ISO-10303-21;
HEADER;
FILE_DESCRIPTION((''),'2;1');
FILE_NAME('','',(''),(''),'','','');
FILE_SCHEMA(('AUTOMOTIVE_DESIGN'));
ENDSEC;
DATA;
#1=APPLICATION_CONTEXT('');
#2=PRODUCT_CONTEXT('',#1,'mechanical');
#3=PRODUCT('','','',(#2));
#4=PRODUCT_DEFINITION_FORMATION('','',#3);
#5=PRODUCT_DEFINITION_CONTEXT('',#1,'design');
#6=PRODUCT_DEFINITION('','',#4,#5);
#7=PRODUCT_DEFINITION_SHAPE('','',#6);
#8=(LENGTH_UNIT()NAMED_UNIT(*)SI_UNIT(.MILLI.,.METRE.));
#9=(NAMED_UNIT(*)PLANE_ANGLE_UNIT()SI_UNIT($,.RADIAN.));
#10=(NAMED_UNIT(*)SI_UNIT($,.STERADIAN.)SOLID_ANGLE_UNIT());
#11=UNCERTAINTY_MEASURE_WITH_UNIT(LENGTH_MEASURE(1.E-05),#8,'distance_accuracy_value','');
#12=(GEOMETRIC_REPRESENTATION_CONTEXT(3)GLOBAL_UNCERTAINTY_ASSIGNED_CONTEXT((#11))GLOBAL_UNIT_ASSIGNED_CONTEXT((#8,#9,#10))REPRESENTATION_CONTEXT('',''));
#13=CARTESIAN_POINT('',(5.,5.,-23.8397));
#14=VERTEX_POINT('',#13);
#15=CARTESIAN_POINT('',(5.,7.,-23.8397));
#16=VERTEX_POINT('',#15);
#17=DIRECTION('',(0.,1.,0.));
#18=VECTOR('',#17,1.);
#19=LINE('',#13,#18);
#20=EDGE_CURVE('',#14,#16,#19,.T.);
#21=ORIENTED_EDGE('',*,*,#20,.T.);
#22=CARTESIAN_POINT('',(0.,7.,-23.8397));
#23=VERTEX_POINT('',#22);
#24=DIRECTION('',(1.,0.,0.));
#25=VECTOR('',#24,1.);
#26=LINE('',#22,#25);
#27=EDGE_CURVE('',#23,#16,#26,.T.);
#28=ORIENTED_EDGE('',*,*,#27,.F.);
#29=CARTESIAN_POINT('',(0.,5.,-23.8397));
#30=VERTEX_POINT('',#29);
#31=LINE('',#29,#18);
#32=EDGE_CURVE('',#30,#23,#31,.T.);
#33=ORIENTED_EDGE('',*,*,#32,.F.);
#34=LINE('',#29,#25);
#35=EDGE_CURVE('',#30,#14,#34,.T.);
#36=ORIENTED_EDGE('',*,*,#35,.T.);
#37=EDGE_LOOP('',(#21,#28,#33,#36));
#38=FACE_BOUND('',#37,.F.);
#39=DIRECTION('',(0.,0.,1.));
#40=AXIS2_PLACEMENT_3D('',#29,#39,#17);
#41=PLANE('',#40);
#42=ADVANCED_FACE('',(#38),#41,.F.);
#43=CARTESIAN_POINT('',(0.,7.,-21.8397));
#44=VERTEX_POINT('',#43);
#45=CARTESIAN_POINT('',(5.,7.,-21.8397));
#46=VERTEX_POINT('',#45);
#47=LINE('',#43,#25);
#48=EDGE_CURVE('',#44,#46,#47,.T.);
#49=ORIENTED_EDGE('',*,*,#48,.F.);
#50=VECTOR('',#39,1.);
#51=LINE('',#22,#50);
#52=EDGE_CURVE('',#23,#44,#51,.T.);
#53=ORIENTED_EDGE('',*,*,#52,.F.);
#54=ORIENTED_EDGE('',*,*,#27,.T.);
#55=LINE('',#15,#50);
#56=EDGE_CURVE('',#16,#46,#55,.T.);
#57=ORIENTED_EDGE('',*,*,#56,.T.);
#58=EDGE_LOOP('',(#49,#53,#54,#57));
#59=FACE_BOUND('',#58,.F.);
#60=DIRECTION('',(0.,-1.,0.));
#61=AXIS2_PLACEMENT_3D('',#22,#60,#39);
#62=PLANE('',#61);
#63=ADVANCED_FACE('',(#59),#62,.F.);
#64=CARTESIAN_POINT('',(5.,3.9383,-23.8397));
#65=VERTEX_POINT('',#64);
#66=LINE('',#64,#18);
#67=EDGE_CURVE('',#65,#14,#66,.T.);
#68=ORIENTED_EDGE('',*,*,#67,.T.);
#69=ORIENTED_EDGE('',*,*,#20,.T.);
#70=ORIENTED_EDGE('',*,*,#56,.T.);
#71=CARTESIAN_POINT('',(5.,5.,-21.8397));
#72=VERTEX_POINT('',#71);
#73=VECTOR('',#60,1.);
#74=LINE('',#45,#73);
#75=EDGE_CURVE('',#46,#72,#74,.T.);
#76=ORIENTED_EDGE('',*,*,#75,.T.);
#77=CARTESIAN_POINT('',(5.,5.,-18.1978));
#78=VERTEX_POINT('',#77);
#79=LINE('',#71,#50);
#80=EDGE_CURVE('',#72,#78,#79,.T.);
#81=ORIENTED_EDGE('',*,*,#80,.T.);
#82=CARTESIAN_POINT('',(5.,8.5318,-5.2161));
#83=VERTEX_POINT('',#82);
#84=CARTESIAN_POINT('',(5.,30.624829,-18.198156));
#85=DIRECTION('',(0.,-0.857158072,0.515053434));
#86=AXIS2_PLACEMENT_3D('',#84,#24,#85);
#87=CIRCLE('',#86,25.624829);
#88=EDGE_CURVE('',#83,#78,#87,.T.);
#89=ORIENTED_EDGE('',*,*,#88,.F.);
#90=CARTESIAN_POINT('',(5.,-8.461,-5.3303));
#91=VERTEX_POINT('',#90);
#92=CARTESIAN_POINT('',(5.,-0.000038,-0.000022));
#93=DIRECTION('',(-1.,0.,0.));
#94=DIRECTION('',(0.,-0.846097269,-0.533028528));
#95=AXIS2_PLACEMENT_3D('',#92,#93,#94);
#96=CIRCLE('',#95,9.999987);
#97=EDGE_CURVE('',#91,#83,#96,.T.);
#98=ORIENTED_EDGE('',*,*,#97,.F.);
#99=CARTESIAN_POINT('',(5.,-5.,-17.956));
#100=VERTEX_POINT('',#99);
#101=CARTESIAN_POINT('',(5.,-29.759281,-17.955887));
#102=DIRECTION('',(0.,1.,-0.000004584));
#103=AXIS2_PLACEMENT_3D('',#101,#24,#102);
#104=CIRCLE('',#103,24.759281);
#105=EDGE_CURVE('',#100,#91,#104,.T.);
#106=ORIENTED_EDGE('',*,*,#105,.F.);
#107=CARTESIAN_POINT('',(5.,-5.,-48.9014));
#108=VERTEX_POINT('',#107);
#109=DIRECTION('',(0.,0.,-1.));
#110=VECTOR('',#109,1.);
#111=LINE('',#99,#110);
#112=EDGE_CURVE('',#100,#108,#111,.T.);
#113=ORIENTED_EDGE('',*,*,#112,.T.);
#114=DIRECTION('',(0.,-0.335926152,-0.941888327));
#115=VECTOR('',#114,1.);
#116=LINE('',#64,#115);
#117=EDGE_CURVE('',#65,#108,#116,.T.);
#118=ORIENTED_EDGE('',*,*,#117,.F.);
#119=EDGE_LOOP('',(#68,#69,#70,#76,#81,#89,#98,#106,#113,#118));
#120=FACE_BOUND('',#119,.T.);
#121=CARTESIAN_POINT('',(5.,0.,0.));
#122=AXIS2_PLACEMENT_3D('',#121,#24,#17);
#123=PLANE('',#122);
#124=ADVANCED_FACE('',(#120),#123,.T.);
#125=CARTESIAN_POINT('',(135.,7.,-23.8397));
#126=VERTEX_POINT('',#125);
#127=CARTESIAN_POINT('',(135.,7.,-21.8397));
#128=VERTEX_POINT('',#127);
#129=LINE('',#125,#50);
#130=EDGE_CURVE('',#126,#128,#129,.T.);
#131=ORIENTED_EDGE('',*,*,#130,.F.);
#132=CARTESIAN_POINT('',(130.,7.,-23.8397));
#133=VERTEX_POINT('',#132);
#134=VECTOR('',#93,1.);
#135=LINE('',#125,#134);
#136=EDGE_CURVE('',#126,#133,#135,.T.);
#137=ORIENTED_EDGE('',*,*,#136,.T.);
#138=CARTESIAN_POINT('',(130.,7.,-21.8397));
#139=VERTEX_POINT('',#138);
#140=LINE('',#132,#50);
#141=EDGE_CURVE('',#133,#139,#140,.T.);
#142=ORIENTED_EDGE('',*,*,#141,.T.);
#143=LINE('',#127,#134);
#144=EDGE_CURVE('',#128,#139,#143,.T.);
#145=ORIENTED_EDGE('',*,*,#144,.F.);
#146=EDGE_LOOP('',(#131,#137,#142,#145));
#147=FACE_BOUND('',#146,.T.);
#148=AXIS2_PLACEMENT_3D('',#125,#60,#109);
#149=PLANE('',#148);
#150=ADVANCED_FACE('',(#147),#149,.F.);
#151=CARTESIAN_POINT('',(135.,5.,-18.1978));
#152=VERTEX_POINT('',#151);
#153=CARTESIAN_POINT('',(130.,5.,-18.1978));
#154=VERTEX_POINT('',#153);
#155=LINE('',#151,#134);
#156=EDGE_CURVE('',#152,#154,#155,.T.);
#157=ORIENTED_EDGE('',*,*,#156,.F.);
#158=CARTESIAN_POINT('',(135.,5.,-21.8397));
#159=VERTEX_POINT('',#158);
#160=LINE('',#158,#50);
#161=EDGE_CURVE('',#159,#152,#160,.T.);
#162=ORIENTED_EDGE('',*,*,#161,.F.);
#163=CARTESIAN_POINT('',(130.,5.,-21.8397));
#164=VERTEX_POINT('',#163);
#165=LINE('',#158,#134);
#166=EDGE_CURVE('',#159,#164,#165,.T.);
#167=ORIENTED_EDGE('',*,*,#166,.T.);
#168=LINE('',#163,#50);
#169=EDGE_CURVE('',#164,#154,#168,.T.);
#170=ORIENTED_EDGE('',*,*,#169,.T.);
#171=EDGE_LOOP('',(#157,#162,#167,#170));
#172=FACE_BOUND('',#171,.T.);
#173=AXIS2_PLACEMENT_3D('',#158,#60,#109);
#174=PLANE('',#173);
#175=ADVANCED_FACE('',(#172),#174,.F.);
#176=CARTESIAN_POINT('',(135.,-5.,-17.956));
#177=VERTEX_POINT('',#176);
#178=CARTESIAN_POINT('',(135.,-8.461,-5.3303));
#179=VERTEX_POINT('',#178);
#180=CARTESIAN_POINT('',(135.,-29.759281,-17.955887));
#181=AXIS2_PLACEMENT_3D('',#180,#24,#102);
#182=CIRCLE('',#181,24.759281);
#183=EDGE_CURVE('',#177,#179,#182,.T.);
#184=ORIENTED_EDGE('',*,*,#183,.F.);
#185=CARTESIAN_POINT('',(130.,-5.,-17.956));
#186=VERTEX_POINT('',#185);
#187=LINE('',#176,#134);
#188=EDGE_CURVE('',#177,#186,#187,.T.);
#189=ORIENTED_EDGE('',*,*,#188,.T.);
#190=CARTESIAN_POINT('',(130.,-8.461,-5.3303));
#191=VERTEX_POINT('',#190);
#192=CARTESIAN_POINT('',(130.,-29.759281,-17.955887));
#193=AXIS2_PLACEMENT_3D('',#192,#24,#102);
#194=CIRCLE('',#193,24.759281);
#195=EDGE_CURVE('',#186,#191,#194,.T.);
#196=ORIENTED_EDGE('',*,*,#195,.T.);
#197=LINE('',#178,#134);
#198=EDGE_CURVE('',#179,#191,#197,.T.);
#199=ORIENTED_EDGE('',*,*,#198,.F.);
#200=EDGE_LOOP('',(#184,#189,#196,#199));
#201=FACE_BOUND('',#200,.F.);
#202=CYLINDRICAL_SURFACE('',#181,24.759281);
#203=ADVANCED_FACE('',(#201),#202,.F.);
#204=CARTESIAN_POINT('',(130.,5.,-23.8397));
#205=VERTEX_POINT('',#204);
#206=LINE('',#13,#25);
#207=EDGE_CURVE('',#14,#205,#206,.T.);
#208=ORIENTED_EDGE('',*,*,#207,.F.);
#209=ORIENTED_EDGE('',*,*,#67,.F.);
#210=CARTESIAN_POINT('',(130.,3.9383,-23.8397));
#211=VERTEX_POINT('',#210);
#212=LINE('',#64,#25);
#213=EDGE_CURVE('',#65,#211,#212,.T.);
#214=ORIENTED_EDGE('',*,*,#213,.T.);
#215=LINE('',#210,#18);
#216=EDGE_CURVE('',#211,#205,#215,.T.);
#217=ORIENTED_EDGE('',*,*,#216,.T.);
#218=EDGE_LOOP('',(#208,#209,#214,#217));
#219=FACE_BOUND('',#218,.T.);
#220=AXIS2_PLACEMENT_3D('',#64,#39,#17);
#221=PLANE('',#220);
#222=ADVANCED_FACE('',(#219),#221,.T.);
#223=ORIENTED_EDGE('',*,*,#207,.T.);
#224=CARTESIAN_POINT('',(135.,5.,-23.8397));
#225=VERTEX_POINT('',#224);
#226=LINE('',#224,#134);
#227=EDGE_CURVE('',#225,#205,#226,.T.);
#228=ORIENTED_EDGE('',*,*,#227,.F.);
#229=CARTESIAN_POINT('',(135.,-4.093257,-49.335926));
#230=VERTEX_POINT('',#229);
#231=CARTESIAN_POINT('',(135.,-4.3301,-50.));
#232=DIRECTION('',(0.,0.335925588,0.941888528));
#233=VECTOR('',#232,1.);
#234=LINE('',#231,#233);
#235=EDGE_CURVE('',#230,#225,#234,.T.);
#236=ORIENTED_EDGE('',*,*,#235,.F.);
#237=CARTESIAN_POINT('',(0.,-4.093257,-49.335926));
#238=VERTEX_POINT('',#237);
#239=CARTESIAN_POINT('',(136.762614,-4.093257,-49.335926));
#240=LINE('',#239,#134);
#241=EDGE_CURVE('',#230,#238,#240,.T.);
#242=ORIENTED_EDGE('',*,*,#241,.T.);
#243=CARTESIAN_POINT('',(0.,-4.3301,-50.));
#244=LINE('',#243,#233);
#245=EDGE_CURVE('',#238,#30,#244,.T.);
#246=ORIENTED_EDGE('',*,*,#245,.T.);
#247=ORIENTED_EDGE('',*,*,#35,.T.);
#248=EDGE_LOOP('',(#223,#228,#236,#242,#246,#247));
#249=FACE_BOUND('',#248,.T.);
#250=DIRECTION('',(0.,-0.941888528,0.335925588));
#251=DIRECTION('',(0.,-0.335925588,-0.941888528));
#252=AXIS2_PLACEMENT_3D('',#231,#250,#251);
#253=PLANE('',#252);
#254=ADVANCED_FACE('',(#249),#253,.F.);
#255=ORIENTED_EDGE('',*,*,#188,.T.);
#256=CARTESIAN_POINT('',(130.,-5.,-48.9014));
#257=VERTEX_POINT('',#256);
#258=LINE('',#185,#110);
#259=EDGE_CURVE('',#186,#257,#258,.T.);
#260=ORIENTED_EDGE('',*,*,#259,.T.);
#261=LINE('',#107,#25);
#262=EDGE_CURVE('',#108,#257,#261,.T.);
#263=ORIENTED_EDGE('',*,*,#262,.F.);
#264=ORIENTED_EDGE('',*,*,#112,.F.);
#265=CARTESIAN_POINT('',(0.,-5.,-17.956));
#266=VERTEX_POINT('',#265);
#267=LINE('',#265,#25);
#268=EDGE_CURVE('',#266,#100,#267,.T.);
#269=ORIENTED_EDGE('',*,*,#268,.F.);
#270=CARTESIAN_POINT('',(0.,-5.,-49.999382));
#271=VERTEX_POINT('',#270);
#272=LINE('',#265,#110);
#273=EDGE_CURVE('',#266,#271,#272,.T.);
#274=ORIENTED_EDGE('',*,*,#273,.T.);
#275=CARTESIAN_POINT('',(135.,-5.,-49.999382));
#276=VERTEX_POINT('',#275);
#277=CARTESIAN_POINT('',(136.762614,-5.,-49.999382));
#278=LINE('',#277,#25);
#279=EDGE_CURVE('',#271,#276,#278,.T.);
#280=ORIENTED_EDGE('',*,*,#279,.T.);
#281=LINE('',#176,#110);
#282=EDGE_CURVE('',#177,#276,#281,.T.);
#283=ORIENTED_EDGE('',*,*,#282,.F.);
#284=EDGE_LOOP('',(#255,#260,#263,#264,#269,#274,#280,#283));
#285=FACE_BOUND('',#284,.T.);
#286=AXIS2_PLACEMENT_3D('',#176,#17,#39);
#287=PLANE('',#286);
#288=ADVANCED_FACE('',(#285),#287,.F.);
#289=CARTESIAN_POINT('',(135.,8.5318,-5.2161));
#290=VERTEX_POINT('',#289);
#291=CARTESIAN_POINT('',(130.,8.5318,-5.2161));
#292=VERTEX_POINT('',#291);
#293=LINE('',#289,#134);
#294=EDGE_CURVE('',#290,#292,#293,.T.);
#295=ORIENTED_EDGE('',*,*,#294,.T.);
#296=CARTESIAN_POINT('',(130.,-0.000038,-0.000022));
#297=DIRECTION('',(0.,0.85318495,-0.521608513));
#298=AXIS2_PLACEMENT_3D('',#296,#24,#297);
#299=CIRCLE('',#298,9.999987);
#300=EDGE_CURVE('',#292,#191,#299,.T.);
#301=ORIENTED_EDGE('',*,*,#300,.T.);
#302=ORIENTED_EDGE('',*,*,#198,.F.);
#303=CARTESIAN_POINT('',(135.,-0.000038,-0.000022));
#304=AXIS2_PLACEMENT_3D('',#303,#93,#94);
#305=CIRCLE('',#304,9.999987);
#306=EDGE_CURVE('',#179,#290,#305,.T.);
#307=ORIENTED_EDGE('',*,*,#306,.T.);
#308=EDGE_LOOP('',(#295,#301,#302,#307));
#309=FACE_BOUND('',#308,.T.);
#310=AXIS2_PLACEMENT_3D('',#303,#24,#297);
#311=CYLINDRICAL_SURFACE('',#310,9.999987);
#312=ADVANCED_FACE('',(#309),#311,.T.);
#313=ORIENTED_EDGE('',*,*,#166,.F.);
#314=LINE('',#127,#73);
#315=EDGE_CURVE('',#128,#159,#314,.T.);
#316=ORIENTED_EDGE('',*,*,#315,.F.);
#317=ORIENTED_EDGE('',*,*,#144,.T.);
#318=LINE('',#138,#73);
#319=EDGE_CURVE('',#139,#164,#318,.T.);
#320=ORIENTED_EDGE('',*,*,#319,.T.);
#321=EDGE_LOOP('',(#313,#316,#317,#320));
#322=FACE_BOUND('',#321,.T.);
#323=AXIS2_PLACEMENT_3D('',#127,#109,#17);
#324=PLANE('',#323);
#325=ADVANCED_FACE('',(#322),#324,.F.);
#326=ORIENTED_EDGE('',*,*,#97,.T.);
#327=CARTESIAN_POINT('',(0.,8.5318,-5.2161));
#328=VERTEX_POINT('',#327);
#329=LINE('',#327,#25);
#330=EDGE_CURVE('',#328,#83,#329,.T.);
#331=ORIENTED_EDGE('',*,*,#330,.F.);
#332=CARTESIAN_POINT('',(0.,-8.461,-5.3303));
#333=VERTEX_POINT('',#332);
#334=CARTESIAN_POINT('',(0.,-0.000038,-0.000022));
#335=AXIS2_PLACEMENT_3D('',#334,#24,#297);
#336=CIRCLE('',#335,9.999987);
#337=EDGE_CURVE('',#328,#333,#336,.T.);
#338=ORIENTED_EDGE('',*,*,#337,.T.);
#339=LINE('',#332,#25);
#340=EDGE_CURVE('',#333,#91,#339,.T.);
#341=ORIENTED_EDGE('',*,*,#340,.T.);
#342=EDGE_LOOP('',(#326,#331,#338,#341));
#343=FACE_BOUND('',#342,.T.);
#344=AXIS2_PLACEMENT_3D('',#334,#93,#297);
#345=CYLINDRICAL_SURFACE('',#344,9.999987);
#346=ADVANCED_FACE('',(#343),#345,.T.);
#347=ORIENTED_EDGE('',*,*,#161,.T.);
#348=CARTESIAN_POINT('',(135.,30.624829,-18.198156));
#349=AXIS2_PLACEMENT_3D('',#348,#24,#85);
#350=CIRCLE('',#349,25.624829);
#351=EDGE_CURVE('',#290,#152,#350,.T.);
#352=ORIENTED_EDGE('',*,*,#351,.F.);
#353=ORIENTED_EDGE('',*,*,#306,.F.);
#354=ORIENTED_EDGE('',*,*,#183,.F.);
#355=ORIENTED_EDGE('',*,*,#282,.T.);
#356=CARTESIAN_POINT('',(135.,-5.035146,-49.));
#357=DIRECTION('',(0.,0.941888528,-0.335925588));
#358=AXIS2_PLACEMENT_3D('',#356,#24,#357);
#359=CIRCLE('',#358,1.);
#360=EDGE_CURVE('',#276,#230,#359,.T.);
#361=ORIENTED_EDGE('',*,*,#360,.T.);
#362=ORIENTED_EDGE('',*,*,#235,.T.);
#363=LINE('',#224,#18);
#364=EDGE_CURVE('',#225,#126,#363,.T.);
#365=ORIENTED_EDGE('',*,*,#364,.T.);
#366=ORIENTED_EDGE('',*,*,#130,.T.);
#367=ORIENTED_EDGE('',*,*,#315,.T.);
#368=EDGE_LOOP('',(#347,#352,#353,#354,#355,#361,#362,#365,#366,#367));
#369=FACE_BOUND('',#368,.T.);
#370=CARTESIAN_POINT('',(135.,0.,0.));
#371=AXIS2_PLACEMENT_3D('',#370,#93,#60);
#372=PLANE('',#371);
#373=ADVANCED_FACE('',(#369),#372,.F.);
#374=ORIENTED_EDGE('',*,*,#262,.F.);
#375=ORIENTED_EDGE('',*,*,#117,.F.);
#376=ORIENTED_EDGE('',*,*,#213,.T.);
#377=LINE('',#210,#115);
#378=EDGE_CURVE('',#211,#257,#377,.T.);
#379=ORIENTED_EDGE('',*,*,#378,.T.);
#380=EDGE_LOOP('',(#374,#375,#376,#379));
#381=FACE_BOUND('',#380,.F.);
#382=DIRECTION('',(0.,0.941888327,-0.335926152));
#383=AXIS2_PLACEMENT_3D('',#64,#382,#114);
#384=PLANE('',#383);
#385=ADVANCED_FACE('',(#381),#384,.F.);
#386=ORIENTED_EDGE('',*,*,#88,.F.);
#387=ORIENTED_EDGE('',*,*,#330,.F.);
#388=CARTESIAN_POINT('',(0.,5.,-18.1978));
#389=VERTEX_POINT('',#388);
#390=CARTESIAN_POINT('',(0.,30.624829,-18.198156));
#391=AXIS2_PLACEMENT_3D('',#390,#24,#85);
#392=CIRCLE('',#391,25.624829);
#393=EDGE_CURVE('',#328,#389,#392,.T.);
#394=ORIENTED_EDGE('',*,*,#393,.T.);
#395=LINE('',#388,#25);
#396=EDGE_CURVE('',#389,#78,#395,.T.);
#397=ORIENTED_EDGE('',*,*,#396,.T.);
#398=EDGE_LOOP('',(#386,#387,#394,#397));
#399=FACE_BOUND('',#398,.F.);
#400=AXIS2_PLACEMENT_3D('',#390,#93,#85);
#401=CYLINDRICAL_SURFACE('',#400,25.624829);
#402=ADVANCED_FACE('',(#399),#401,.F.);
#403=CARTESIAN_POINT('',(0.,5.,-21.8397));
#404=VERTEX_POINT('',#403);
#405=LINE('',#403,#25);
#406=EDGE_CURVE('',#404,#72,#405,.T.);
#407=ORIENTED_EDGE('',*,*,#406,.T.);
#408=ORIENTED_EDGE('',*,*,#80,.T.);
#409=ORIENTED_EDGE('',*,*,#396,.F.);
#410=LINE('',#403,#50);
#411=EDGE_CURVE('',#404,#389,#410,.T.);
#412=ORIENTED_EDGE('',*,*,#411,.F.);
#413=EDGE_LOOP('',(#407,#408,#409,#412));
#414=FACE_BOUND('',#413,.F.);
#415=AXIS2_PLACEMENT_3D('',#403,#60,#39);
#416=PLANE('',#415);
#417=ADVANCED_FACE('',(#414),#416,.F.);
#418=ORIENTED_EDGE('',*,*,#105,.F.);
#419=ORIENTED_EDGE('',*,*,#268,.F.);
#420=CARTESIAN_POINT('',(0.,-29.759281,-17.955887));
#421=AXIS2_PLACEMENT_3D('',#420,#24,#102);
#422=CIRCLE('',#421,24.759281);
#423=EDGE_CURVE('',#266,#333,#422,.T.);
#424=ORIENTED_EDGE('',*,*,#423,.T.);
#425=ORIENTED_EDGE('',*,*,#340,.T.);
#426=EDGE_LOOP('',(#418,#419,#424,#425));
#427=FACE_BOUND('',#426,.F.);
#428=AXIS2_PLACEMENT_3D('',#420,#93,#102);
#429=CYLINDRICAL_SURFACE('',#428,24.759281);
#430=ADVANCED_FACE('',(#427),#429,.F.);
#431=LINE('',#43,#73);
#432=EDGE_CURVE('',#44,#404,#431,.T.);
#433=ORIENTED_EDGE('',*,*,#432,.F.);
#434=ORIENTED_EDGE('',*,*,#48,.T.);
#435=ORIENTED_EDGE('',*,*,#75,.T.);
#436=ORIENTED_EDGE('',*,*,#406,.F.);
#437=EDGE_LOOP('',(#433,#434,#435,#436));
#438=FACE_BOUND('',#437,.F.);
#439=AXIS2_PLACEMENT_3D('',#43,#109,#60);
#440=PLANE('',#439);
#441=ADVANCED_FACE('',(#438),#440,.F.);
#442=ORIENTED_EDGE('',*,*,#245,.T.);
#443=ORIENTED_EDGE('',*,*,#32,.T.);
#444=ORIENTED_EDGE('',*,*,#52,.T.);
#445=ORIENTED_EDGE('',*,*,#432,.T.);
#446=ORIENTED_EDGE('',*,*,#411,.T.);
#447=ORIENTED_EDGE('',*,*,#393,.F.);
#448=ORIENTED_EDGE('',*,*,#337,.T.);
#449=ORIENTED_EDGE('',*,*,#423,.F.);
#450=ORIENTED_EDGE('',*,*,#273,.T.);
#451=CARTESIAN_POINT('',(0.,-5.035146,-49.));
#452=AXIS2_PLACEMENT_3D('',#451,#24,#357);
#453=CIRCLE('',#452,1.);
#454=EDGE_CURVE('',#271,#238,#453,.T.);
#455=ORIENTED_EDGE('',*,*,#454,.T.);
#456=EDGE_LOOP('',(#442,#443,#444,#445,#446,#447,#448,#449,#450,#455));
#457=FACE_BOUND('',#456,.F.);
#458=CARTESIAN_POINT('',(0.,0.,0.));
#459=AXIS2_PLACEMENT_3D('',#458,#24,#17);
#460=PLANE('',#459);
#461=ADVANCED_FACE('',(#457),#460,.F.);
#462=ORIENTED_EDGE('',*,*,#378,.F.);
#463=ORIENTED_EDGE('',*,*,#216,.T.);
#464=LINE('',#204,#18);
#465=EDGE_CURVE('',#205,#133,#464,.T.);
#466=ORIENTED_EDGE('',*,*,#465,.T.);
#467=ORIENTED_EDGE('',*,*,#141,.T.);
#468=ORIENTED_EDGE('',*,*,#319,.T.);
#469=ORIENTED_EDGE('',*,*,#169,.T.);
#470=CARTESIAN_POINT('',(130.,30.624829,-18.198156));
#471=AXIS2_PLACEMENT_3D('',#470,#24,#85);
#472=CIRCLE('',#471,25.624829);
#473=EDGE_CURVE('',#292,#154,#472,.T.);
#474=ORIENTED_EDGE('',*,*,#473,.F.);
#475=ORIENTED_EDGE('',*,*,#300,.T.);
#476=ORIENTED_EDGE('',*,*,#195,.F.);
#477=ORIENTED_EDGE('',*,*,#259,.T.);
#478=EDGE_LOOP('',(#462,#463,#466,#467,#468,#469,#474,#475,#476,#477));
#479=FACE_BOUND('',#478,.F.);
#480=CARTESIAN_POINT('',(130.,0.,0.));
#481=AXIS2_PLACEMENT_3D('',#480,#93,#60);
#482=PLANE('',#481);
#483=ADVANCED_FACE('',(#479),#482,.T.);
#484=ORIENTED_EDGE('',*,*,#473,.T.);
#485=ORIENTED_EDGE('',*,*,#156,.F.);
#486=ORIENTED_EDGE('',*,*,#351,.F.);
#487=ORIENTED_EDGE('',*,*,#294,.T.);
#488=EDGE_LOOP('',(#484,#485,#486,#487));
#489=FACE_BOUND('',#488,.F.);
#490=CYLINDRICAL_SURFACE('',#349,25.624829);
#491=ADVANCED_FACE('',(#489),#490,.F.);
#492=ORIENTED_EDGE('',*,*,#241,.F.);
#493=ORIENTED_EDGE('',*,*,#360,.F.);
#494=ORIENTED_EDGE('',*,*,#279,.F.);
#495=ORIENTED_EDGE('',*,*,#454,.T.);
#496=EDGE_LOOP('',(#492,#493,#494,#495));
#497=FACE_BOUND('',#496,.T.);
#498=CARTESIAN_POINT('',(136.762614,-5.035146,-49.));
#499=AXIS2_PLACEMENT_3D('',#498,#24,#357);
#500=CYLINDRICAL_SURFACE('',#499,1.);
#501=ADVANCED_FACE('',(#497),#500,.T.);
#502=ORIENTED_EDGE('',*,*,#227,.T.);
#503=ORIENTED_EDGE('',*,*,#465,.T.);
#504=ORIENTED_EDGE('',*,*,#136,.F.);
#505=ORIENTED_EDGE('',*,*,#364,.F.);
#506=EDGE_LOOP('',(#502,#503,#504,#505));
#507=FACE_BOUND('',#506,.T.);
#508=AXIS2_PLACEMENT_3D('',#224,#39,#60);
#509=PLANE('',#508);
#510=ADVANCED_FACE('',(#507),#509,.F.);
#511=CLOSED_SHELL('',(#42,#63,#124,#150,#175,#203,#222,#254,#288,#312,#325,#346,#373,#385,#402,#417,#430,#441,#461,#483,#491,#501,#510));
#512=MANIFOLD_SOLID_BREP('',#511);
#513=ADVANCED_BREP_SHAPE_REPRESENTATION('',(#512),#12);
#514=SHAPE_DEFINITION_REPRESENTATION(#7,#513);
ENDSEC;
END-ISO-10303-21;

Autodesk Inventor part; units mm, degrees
ref_plane "YZ Plane" through (0, 0, 0) normal (1, 0, 0) x (0, 1, 0)
ref_plane "XZ Plane" through (0, 0, 0) normal (0, 1, 0) x (-1, 0, 0)
sketch "Boceto1" plane through (0, 0, 0) normal (1, 0, 0) x (0, 1, 0)
  arc A0 (8.5318, -5.2161) -> (-8.461, -5.3303) centre (0, 0) ccw
  line L0 (-5, -17.956) -> (-5, -50)
  line L1 (-5, -50) -> (-4.3301, -50)
  line L2 (5, -21.8397) -> (5, -18.1978)
  line L3 (0, 0) -> (8.6603, -5) construction
  line L4 (0, 0) -> (10, 0) construction
  line L5 (0, 0) -> (-8.6603, -5) construction
  line L6 (0, 0) -> (10, 0) construction
  arc A1 (8.6603, -5) -> (5, -18.1978) centre (30.624, -18.1978) ccw
  arc A2 (-5, -17.956) -> (-8.6603, -5) centre (-29.7601, -17.956) ccw
  line L7 (-4.3301, -50) -> (5, -23.8397)
  line L8 (5, -23.8397) -> (7, -23.8397)
  line L9 (7, -23.8397) -> (7, -21.8397)
  line L10 (7, -21.8397) -> (5, -21.8397)
  point P0 (-4.6651, -50)
  dimension "d3" = 30
  dimension "d4" = 210
  dimension "d8" = 50
  dimension "d16" = 10
extrude "Extrusión1" add sketch "Boceto1" along normal blind 5
sketch "Boceto3" plane through (5, 0, 0) normal (1, 0, 0) x (0, 0, -1)
  line L0 (23.8397, 5) -> (50, -4.3301)
  line L1 (23.8397, 3.9383) -> (48.9014, -5)
  line L2 (17.956, -5) -> (50, -5) projected
  line L3 (50, -4.3301) -> (50, -5)
  line L4 (48.9014, -5) -> (50, -5)
  line L5 (23.8397, 3.9383) -> (23.8397, 5)
  point P0 (0, 0)
  dimension "d12" = 1
extrude "Extrusión2" add sketch "Boceto3" along normal blind 125
ref_plane "Plano de trabajo1" through (67.5, 0, 0) normal (1, 0, 0) x (0, 0, -1)
mirror "Simetría1" about plane through (67.5, 0, 0) normal (1, 0, 0) of "Extrusión1"
fillet "Empalme1" radius 1 1 edges at (67.5, -4.3301, -50)
properties part number "cuchilla"
